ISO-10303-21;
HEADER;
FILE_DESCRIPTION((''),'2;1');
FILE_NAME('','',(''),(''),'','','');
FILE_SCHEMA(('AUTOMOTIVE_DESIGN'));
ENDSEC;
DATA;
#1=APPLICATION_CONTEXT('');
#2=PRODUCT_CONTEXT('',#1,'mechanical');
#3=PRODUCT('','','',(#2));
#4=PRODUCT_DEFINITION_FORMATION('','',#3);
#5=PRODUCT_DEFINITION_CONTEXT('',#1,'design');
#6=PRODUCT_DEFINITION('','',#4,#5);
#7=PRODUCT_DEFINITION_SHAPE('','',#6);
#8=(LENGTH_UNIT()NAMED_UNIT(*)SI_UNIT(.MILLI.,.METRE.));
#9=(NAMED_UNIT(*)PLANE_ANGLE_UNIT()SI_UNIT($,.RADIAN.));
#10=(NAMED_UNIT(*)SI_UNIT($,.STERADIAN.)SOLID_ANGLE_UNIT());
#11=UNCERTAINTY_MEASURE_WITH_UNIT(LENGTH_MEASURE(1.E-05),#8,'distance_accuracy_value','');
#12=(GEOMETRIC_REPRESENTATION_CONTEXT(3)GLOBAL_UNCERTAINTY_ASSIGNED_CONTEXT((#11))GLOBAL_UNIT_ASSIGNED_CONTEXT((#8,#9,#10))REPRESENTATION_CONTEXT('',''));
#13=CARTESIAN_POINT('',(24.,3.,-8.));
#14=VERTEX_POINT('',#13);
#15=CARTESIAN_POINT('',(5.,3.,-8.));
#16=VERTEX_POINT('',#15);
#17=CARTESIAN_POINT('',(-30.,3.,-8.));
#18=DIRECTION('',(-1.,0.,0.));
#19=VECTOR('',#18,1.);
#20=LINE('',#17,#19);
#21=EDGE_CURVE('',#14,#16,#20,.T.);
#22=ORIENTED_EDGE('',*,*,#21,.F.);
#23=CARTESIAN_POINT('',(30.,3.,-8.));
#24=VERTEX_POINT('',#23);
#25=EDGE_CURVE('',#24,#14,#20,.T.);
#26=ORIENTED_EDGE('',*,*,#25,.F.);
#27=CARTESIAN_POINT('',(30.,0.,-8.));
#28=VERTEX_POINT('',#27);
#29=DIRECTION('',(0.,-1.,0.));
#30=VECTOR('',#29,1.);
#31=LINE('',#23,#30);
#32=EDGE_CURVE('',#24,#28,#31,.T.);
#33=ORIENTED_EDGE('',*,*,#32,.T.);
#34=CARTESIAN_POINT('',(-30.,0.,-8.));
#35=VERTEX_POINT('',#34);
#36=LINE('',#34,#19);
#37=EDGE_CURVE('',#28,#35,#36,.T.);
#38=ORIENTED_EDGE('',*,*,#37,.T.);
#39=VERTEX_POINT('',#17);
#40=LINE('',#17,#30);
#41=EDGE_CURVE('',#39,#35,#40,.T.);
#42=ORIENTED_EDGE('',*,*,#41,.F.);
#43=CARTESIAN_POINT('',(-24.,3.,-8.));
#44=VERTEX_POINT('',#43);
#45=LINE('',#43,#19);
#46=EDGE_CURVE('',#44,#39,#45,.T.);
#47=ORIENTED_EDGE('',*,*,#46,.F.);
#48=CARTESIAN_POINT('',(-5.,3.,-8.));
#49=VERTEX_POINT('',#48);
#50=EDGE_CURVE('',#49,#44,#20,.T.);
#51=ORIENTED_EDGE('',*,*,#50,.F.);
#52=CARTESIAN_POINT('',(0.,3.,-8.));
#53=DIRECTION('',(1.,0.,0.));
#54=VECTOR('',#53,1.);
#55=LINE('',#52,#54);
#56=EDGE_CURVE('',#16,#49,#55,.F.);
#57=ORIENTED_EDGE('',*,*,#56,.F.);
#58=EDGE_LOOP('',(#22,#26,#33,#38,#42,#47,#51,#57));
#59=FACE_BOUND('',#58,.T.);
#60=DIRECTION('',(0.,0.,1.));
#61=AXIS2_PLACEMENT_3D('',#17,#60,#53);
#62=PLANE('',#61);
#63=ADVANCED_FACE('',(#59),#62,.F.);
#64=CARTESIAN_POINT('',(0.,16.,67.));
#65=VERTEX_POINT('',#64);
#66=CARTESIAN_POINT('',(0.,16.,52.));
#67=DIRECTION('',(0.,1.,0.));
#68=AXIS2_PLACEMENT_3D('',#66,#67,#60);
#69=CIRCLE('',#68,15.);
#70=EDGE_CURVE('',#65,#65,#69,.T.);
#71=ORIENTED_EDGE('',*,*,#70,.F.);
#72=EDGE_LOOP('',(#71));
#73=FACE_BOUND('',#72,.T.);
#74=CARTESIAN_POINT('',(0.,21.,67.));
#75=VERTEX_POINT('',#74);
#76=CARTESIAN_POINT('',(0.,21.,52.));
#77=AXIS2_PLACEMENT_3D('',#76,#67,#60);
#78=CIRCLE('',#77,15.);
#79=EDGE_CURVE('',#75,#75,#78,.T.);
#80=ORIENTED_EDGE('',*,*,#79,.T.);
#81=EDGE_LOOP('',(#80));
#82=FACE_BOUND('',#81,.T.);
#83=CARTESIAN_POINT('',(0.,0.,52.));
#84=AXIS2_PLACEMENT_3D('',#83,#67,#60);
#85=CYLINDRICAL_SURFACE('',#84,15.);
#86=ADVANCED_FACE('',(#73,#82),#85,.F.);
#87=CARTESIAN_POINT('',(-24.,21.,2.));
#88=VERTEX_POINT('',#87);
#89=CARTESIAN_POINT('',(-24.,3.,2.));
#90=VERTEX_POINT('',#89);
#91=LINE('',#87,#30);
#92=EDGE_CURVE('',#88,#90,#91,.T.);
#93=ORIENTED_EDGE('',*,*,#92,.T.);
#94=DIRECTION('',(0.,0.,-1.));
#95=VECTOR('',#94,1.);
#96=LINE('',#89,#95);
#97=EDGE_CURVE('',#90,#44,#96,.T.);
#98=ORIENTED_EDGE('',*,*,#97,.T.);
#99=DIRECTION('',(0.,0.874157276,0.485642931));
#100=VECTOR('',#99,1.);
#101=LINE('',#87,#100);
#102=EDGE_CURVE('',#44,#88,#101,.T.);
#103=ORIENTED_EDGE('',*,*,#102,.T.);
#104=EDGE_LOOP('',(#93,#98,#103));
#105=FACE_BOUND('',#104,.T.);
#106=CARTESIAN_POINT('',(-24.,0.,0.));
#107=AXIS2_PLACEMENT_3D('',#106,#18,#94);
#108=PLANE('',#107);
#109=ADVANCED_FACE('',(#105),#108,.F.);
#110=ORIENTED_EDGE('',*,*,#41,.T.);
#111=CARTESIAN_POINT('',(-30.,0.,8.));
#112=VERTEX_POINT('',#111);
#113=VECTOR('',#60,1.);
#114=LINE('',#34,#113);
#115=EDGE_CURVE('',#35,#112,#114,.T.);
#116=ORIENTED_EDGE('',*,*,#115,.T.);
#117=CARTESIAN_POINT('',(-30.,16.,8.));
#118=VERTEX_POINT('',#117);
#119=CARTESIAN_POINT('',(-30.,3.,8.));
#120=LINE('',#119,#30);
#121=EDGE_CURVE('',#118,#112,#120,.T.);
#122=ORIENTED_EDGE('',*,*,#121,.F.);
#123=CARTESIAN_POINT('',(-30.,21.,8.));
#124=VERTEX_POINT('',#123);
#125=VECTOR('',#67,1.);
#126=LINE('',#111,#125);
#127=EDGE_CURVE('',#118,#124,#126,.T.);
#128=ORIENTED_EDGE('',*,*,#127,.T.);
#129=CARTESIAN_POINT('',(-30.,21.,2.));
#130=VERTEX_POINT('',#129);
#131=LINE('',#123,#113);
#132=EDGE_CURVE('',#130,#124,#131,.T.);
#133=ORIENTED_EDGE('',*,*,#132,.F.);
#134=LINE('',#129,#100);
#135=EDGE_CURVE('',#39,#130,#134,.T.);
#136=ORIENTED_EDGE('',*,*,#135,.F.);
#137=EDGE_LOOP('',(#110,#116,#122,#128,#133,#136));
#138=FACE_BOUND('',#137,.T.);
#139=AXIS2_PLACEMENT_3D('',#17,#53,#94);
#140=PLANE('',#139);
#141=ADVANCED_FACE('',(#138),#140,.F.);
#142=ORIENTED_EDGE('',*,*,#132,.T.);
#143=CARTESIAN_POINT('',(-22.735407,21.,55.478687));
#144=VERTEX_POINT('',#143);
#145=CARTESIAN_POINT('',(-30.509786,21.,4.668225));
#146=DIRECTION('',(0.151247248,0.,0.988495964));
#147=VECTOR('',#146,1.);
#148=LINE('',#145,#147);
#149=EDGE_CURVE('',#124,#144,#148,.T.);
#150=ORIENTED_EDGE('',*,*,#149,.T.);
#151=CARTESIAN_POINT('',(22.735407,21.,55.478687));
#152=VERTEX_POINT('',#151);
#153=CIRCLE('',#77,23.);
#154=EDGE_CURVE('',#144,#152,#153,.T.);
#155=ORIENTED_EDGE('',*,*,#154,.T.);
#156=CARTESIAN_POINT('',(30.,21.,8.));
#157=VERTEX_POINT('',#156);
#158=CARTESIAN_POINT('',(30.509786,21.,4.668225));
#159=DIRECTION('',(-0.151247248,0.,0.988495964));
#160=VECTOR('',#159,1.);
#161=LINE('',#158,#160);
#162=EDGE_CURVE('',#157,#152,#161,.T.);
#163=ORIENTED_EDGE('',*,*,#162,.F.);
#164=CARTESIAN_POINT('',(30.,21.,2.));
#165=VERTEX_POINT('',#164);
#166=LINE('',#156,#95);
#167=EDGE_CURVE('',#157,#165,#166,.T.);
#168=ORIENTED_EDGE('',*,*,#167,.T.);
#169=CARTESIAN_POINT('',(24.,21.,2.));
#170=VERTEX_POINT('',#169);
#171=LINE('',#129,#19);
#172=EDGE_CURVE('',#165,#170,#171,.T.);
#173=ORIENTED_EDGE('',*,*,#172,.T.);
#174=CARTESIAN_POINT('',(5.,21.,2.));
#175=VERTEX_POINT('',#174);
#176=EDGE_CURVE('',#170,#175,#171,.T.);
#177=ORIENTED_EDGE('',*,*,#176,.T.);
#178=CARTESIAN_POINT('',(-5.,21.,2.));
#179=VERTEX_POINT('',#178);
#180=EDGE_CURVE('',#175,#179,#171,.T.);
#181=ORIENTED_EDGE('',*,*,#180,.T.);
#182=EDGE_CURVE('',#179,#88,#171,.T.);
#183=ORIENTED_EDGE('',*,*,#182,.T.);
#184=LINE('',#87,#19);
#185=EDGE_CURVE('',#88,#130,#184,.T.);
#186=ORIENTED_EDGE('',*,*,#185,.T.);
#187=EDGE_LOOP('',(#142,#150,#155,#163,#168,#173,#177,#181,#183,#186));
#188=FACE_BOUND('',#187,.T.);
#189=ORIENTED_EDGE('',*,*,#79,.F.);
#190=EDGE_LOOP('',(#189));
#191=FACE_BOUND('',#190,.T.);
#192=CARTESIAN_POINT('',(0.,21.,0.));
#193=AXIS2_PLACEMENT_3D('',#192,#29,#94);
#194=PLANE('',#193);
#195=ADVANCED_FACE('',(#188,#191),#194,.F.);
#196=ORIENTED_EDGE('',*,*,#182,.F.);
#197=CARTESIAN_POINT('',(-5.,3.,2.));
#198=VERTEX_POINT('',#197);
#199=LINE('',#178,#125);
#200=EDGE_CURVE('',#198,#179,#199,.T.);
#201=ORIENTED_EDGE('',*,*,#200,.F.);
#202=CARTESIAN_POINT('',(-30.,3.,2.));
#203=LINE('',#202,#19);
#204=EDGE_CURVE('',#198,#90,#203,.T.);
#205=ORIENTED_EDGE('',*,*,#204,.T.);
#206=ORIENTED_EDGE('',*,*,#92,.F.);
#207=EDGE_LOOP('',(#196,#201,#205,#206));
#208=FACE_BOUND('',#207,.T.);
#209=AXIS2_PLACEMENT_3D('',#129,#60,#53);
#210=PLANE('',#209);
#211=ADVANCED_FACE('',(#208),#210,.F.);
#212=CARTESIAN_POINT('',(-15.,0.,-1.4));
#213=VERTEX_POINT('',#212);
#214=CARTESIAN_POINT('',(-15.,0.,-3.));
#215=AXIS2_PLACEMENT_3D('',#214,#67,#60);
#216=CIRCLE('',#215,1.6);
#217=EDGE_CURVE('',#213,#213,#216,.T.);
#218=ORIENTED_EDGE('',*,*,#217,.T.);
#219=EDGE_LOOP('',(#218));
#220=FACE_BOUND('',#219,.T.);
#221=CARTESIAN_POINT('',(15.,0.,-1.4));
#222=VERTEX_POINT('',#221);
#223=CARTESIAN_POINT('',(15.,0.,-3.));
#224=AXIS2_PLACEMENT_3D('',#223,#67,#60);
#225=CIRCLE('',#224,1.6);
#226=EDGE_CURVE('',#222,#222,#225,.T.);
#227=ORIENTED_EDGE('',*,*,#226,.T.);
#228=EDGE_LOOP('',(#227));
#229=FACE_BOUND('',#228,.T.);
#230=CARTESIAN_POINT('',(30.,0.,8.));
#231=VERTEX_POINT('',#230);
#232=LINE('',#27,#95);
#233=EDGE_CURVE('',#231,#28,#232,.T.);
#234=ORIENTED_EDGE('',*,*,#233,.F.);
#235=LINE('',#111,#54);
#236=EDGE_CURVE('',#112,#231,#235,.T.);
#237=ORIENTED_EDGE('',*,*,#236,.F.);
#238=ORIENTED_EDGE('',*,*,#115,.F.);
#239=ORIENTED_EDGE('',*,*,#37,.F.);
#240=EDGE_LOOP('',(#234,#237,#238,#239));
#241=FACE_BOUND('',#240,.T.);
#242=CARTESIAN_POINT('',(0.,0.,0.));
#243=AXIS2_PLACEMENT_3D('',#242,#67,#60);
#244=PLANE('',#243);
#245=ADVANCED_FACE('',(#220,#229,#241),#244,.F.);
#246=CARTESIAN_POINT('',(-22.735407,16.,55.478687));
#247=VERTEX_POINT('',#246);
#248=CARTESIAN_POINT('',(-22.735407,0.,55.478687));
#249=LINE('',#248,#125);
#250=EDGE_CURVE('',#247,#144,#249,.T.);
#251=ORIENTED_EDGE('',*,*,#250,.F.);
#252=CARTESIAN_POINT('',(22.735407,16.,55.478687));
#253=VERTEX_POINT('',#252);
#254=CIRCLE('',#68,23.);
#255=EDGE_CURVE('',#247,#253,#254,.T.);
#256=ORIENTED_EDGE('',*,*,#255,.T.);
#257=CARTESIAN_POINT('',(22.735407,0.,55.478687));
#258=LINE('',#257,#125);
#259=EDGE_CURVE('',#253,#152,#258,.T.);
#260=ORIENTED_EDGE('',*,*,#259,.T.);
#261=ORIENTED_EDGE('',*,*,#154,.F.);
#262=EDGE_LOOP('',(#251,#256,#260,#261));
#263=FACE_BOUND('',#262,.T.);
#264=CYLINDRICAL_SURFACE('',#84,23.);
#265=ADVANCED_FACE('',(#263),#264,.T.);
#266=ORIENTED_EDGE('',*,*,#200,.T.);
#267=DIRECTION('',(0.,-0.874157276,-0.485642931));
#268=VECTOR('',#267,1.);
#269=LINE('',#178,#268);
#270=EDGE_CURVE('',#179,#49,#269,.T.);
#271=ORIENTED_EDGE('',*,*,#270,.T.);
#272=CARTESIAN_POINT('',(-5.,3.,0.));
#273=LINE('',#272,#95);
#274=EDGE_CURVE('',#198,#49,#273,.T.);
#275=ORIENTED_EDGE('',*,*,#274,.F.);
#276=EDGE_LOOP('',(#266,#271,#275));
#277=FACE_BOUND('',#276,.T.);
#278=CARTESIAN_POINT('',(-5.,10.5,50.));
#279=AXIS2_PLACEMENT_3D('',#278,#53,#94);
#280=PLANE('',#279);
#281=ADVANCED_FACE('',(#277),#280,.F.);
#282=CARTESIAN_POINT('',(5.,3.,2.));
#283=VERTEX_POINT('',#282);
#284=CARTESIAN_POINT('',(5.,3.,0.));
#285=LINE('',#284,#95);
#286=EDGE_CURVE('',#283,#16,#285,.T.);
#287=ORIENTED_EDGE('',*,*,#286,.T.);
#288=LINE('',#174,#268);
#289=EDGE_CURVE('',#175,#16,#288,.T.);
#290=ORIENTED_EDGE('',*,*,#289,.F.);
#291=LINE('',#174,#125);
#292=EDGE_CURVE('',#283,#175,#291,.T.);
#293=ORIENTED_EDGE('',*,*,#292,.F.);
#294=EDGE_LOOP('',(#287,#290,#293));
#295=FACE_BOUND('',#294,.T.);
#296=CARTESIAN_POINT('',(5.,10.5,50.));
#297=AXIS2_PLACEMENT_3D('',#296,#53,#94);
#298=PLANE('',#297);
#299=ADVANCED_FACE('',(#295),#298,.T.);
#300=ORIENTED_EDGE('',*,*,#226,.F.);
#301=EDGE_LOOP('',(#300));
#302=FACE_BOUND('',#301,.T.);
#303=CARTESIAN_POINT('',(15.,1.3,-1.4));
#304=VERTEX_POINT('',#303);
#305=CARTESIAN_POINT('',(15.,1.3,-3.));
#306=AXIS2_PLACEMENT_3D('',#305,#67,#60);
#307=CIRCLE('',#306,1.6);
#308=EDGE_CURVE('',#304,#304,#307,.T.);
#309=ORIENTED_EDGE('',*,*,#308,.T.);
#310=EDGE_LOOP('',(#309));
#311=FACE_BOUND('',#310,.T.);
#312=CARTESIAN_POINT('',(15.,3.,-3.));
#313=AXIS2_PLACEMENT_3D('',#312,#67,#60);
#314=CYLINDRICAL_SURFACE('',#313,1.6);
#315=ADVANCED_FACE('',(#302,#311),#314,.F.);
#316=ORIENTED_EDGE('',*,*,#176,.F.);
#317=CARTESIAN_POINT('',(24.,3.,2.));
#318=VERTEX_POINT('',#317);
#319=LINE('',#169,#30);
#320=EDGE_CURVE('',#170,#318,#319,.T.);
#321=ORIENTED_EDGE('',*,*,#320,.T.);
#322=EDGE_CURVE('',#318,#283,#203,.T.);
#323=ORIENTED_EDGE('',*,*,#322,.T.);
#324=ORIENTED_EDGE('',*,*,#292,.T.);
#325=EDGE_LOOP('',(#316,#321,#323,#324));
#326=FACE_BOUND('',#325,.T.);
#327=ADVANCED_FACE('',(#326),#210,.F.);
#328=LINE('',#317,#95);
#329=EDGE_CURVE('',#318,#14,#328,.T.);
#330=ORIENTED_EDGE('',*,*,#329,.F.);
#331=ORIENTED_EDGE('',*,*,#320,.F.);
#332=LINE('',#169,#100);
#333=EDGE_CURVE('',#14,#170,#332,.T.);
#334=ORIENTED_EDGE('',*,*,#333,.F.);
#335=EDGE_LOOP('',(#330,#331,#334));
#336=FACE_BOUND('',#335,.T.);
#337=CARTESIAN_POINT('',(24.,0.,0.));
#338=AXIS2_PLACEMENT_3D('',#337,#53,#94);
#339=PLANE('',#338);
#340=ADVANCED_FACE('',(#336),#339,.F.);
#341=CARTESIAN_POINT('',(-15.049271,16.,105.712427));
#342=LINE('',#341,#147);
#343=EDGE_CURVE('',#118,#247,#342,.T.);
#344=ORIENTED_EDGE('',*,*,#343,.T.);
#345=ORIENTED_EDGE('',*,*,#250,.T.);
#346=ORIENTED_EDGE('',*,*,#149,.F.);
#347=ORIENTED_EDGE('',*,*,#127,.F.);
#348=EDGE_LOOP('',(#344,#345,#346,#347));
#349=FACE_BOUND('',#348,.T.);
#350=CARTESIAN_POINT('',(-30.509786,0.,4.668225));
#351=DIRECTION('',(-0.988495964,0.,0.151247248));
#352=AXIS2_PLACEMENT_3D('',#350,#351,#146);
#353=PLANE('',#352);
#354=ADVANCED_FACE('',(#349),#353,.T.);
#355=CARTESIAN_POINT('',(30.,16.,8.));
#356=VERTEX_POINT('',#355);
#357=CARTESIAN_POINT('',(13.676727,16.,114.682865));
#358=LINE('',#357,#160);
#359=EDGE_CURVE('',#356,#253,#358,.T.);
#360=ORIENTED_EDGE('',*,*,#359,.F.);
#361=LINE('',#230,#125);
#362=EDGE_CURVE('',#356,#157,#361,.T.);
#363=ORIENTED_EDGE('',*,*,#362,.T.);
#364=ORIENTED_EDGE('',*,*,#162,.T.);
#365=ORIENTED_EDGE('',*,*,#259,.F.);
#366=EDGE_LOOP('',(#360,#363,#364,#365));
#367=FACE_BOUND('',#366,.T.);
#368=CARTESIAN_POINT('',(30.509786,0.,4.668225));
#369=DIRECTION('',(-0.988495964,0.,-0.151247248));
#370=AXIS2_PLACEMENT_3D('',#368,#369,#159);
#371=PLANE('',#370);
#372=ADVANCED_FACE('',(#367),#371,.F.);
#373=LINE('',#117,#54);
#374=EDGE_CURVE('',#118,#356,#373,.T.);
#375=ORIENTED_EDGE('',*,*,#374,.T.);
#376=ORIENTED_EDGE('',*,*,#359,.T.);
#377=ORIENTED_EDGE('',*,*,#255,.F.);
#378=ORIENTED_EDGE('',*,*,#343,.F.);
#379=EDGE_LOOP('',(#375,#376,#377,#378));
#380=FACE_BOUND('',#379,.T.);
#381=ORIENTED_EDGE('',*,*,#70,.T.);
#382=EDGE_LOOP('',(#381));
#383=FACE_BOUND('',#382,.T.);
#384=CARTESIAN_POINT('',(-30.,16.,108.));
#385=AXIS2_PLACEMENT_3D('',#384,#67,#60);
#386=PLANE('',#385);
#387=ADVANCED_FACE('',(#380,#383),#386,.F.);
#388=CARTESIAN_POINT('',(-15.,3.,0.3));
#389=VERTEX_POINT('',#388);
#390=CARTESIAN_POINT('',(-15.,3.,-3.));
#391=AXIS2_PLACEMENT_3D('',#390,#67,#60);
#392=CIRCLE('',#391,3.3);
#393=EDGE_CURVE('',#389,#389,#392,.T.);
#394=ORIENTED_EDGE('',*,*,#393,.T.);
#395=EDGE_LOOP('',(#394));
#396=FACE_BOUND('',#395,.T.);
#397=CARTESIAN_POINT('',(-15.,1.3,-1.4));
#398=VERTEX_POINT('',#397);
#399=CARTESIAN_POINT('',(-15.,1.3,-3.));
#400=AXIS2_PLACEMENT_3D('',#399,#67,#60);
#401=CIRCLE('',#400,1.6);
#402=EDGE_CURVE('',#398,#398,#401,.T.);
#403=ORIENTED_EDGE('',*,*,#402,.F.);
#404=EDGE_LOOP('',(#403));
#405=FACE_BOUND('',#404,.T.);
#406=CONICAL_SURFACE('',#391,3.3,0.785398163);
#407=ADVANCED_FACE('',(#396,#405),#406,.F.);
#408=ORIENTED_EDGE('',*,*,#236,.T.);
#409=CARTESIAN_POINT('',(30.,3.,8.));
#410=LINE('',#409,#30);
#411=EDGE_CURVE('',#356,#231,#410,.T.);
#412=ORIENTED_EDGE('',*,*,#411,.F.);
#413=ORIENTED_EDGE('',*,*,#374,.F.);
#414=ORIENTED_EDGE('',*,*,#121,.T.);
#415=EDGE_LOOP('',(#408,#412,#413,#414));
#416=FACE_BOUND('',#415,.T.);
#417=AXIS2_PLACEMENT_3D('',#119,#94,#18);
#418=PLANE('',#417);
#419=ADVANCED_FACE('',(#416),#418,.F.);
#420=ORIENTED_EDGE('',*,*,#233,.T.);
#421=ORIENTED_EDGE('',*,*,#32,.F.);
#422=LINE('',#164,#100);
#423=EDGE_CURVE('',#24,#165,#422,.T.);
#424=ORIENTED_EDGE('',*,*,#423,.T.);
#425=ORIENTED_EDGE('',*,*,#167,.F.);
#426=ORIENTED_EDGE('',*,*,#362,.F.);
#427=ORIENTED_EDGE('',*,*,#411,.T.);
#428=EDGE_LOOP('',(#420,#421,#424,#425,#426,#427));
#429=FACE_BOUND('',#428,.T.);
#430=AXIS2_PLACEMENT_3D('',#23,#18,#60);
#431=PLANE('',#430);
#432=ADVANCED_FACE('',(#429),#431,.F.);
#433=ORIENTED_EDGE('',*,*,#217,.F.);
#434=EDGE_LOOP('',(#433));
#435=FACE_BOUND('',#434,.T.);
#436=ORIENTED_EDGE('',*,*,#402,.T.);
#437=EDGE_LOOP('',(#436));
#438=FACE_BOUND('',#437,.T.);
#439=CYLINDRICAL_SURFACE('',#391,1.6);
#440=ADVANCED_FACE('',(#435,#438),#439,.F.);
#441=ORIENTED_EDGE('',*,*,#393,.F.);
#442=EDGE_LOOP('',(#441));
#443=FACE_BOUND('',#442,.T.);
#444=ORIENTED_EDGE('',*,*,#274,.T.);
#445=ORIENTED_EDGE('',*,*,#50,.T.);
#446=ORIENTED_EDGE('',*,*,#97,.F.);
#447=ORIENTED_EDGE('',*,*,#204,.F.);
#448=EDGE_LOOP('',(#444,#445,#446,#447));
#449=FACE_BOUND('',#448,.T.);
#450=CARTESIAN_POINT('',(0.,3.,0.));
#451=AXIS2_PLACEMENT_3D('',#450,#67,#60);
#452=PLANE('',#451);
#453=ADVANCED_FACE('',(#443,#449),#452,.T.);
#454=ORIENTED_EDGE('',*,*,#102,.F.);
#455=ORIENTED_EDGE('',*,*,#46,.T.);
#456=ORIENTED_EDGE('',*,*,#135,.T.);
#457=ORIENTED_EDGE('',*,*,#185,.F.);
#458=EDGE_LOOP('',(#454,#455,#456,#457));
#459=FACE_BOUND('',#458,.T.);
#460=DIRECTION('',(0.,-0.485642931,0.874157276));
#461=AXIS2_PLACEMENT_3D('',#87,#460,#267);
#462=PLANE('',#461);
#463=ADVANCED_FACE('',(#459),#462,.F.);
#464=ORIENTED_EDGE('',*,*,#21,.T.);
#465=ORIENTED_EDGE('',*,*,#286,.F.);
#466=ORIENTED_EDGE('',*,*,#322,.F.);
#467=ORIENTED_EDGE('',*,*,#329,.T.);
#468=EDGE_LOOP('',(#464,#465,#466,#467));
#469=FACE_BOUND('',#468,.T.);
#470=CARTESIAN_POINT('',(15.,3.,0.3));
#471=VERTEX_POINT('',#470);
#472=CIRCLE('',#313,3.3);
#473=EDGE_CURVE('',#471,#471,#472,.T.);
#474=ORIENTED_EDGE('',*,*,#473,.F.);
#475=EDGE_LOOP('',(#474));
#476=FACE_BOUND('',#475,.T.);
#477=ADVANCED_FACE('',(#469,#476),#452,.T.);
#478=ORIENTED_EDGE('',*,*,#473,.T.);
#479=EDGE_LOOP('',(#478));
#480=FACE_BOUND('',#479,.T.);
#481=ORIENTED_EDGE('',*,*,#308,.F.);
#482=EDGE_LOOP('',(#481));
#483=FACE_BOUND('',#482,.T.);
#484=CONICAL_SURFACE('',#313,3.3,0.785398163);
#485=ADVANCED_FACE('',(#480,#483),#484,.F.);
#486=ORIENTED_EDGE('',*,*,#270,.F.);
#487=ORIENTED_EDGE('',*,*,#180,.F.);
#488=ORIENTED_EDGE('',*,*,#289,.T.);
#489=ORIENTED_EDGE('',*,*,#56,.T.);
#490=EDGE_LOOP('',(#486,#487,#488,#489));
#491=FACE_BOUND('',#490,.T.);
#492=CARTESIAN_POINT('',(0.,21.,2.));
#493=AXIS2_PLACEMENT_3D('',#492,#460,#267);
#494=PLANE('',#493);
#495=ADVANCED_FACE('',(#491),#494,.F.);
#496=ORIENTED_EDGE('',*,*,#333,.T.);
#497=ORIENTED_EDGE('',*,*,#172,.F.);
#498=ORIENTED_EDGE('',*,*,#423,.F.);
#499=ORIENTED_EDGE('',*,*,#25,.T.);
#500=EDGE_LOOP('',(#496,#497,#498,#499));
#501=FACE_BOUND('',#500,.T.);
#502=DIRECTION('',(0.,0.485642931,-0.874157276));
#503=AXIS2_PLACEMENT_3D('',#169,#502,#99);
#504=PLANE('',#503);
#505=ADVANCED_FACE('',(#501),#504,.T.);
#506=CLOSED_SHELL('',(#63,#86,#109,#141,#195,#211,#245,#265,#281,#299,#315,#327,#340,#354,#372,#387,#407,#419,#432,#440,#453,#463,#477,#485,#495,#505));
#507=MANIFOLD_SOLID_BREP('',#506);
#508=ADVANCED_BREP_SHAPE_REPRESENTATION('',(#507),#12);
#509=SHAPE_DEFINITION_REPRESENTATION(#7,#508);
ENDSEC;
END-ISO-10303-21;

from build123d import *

# Parameters (mm, degrees)
SKETCH_1_W          = 60
SKETCH_1_H          = 16
EXTRUDE_1_DEPTH     = 3
SKETCH_2_W          = 60
SKETCH_2_H          = 6
EXTRUDE_2_DEPTH     = 18
SKETCH_3_W          = 60
SKETCH_3_H          = 5
EXTRUDE_3_DEPTH     = 100
RIB_1_REACH         = 116.039
SKETCH_4_WALL_W     = 250.670193986
SKETCH_4_WALL_H     = 10
EXTRUDE_4_DEPTH     = 6
CUT_EXTRUDE_1_DEPTH = 115.039466852
SKETCH_8_3_R        = 15
CUT_EXTRUDE_2_DEPTH = 84.462566459


# Read off the part's stored shape, not the designer's step: 高级异型孔1
with BuildPart() as part:
    # 草图1 → 凸台-拉伸1 (new body)
    with BuildSketch(Plane(origin=(0, 0, 0), x_dir=(1, 0, 0), z_dir=(0, 1, 0))):
        Rectangle(SKETCH_1_W, SKETCH_1_H)
    extrude(amount=EXTRUDE_1_DEPTH)

    # 草图2 → 凸台-拉伸2 (add)
    with BuildSketch(Plane(origin=(0, 3, 0), x_dir=(1, 0, 0), z_dir=(0, 1, 0))):
        with Locations((0, -5)):
            Rectangle(SKETCH_2_W, SKETCH_2_H)
    extrude(amount=EXTRUDE_2_DEPTH)

    # 草图3 → 凸台-拉伸3 (add)
    with BuildSketch(Plane.XY.offset(8)):
        with Locations((0, 18.5)):
            Rectangle(SKETCH_3_W, SKETCH_3_H)
    extrude(amount=EXTRUDE_3_DEPTH)

    # 草图4 wall → 筋1 (add, up to next)
    with BuildSketch(Plane(origin=(0, 12, -3), x_dir=(0, -0.874157276122, -0.485642931179), z_dir=(0, 0.485642931179, -0.874157276122)), mode=Mode.PRIVATE) as rib_1_sk1:
        Rectangle(SKETCH_4_WALL_W, SKETCH_4_WALL_H)
    rib_1_tool1 = extrude(rib_1_sk1.sketch, amount=-RIB_1_REACH, mode=Mode.PRIVATE) - part.part
    add(rib_1_tool1.solids().sort_by_distance((0, 12, -3))[0])

    # 草图5 → 凸台-拉伸4 (add)
    with BuildSketch(Plane(origin=(30, 0, 0), x_dir=(0, 0, -1), z_dir=(1, 0, 0))):
        Polygon((-2, 21), (8, 3), (-2, 3), align=None)
    extrude_4 = extrude(amount=-EXTRUDE_4_DEPTH)

    # 镜向1: 凸台-拉伸4 across plane
    add(extrude_4.mirror(Plane(origin=(0, 0, 0), x_dir=(0, 0, 1), z_dir=(1, 0, 0))))

    # 高级异型孔1 outline → 高级异型孔1 (revolve, cut)
    with BuildSketch(Plane(origin=(-15, 0, -3), x_dir=(1, 0, 0), z_dir=(0, 0, 1))):
        Polygon((3.3, 3), (0, 3), (0, 0), (1.6, 0), (1.6, 1.3), align=None)
    other_1 = revolve(axis=Axis((-15, 0, -3), (0, 1, 0)), mode=Mode.SUBTRACT)

    # 镜向2: 高级异型孔1 across plane
    add(other_1.mirror(Plane(origin=(0, 0, 0), x_dir=(0, 0, 1), z_dir=(1, 0, 0))), mode=Mode.SUBTRACT)

    # 草图8 → 切除-拉伸1 (cut, through all)
    with BuildSketch(Plane(origin=(0, 21, 0), x_dir=(1, 0, 0), z_dir=(0, 1, 0))):
        with BuildLine():
            Line((-22.735407162, -55.478686702), (-30, -8))
            Line((-30, -8), (-30, -108))
            Line((-30, -108), (30, -108))
            Line((30, -108), (30, -8))
            Line((30, -8), (22.735407162, -55.478686702))
            ThreePointArc((22.735407162, -55.478686702), (0, -75), (-22.735407162, -55.478686702))
        make_face()
    extrude(amount=-CUT_EXTRUDE_1_DEPTH, mode=Mode.SUBTRACT)

    # 草图8<3> → 切除-拉伸2 (cut, through all)
    with BuildSketch(Plane(origin=(0, 21, 0), x_dir=(1, 0, 0), z_dir=(0, 1, 0))):
        with Locations(Location((0, -52, 0), (0, 0, 270))):
            Circle(SKETCH_8_3_R)
    extrude(amount=-CUT_EXTRUDE_2_DEPTH, mode=Mode.SUBTRACT)


solid = part.part
